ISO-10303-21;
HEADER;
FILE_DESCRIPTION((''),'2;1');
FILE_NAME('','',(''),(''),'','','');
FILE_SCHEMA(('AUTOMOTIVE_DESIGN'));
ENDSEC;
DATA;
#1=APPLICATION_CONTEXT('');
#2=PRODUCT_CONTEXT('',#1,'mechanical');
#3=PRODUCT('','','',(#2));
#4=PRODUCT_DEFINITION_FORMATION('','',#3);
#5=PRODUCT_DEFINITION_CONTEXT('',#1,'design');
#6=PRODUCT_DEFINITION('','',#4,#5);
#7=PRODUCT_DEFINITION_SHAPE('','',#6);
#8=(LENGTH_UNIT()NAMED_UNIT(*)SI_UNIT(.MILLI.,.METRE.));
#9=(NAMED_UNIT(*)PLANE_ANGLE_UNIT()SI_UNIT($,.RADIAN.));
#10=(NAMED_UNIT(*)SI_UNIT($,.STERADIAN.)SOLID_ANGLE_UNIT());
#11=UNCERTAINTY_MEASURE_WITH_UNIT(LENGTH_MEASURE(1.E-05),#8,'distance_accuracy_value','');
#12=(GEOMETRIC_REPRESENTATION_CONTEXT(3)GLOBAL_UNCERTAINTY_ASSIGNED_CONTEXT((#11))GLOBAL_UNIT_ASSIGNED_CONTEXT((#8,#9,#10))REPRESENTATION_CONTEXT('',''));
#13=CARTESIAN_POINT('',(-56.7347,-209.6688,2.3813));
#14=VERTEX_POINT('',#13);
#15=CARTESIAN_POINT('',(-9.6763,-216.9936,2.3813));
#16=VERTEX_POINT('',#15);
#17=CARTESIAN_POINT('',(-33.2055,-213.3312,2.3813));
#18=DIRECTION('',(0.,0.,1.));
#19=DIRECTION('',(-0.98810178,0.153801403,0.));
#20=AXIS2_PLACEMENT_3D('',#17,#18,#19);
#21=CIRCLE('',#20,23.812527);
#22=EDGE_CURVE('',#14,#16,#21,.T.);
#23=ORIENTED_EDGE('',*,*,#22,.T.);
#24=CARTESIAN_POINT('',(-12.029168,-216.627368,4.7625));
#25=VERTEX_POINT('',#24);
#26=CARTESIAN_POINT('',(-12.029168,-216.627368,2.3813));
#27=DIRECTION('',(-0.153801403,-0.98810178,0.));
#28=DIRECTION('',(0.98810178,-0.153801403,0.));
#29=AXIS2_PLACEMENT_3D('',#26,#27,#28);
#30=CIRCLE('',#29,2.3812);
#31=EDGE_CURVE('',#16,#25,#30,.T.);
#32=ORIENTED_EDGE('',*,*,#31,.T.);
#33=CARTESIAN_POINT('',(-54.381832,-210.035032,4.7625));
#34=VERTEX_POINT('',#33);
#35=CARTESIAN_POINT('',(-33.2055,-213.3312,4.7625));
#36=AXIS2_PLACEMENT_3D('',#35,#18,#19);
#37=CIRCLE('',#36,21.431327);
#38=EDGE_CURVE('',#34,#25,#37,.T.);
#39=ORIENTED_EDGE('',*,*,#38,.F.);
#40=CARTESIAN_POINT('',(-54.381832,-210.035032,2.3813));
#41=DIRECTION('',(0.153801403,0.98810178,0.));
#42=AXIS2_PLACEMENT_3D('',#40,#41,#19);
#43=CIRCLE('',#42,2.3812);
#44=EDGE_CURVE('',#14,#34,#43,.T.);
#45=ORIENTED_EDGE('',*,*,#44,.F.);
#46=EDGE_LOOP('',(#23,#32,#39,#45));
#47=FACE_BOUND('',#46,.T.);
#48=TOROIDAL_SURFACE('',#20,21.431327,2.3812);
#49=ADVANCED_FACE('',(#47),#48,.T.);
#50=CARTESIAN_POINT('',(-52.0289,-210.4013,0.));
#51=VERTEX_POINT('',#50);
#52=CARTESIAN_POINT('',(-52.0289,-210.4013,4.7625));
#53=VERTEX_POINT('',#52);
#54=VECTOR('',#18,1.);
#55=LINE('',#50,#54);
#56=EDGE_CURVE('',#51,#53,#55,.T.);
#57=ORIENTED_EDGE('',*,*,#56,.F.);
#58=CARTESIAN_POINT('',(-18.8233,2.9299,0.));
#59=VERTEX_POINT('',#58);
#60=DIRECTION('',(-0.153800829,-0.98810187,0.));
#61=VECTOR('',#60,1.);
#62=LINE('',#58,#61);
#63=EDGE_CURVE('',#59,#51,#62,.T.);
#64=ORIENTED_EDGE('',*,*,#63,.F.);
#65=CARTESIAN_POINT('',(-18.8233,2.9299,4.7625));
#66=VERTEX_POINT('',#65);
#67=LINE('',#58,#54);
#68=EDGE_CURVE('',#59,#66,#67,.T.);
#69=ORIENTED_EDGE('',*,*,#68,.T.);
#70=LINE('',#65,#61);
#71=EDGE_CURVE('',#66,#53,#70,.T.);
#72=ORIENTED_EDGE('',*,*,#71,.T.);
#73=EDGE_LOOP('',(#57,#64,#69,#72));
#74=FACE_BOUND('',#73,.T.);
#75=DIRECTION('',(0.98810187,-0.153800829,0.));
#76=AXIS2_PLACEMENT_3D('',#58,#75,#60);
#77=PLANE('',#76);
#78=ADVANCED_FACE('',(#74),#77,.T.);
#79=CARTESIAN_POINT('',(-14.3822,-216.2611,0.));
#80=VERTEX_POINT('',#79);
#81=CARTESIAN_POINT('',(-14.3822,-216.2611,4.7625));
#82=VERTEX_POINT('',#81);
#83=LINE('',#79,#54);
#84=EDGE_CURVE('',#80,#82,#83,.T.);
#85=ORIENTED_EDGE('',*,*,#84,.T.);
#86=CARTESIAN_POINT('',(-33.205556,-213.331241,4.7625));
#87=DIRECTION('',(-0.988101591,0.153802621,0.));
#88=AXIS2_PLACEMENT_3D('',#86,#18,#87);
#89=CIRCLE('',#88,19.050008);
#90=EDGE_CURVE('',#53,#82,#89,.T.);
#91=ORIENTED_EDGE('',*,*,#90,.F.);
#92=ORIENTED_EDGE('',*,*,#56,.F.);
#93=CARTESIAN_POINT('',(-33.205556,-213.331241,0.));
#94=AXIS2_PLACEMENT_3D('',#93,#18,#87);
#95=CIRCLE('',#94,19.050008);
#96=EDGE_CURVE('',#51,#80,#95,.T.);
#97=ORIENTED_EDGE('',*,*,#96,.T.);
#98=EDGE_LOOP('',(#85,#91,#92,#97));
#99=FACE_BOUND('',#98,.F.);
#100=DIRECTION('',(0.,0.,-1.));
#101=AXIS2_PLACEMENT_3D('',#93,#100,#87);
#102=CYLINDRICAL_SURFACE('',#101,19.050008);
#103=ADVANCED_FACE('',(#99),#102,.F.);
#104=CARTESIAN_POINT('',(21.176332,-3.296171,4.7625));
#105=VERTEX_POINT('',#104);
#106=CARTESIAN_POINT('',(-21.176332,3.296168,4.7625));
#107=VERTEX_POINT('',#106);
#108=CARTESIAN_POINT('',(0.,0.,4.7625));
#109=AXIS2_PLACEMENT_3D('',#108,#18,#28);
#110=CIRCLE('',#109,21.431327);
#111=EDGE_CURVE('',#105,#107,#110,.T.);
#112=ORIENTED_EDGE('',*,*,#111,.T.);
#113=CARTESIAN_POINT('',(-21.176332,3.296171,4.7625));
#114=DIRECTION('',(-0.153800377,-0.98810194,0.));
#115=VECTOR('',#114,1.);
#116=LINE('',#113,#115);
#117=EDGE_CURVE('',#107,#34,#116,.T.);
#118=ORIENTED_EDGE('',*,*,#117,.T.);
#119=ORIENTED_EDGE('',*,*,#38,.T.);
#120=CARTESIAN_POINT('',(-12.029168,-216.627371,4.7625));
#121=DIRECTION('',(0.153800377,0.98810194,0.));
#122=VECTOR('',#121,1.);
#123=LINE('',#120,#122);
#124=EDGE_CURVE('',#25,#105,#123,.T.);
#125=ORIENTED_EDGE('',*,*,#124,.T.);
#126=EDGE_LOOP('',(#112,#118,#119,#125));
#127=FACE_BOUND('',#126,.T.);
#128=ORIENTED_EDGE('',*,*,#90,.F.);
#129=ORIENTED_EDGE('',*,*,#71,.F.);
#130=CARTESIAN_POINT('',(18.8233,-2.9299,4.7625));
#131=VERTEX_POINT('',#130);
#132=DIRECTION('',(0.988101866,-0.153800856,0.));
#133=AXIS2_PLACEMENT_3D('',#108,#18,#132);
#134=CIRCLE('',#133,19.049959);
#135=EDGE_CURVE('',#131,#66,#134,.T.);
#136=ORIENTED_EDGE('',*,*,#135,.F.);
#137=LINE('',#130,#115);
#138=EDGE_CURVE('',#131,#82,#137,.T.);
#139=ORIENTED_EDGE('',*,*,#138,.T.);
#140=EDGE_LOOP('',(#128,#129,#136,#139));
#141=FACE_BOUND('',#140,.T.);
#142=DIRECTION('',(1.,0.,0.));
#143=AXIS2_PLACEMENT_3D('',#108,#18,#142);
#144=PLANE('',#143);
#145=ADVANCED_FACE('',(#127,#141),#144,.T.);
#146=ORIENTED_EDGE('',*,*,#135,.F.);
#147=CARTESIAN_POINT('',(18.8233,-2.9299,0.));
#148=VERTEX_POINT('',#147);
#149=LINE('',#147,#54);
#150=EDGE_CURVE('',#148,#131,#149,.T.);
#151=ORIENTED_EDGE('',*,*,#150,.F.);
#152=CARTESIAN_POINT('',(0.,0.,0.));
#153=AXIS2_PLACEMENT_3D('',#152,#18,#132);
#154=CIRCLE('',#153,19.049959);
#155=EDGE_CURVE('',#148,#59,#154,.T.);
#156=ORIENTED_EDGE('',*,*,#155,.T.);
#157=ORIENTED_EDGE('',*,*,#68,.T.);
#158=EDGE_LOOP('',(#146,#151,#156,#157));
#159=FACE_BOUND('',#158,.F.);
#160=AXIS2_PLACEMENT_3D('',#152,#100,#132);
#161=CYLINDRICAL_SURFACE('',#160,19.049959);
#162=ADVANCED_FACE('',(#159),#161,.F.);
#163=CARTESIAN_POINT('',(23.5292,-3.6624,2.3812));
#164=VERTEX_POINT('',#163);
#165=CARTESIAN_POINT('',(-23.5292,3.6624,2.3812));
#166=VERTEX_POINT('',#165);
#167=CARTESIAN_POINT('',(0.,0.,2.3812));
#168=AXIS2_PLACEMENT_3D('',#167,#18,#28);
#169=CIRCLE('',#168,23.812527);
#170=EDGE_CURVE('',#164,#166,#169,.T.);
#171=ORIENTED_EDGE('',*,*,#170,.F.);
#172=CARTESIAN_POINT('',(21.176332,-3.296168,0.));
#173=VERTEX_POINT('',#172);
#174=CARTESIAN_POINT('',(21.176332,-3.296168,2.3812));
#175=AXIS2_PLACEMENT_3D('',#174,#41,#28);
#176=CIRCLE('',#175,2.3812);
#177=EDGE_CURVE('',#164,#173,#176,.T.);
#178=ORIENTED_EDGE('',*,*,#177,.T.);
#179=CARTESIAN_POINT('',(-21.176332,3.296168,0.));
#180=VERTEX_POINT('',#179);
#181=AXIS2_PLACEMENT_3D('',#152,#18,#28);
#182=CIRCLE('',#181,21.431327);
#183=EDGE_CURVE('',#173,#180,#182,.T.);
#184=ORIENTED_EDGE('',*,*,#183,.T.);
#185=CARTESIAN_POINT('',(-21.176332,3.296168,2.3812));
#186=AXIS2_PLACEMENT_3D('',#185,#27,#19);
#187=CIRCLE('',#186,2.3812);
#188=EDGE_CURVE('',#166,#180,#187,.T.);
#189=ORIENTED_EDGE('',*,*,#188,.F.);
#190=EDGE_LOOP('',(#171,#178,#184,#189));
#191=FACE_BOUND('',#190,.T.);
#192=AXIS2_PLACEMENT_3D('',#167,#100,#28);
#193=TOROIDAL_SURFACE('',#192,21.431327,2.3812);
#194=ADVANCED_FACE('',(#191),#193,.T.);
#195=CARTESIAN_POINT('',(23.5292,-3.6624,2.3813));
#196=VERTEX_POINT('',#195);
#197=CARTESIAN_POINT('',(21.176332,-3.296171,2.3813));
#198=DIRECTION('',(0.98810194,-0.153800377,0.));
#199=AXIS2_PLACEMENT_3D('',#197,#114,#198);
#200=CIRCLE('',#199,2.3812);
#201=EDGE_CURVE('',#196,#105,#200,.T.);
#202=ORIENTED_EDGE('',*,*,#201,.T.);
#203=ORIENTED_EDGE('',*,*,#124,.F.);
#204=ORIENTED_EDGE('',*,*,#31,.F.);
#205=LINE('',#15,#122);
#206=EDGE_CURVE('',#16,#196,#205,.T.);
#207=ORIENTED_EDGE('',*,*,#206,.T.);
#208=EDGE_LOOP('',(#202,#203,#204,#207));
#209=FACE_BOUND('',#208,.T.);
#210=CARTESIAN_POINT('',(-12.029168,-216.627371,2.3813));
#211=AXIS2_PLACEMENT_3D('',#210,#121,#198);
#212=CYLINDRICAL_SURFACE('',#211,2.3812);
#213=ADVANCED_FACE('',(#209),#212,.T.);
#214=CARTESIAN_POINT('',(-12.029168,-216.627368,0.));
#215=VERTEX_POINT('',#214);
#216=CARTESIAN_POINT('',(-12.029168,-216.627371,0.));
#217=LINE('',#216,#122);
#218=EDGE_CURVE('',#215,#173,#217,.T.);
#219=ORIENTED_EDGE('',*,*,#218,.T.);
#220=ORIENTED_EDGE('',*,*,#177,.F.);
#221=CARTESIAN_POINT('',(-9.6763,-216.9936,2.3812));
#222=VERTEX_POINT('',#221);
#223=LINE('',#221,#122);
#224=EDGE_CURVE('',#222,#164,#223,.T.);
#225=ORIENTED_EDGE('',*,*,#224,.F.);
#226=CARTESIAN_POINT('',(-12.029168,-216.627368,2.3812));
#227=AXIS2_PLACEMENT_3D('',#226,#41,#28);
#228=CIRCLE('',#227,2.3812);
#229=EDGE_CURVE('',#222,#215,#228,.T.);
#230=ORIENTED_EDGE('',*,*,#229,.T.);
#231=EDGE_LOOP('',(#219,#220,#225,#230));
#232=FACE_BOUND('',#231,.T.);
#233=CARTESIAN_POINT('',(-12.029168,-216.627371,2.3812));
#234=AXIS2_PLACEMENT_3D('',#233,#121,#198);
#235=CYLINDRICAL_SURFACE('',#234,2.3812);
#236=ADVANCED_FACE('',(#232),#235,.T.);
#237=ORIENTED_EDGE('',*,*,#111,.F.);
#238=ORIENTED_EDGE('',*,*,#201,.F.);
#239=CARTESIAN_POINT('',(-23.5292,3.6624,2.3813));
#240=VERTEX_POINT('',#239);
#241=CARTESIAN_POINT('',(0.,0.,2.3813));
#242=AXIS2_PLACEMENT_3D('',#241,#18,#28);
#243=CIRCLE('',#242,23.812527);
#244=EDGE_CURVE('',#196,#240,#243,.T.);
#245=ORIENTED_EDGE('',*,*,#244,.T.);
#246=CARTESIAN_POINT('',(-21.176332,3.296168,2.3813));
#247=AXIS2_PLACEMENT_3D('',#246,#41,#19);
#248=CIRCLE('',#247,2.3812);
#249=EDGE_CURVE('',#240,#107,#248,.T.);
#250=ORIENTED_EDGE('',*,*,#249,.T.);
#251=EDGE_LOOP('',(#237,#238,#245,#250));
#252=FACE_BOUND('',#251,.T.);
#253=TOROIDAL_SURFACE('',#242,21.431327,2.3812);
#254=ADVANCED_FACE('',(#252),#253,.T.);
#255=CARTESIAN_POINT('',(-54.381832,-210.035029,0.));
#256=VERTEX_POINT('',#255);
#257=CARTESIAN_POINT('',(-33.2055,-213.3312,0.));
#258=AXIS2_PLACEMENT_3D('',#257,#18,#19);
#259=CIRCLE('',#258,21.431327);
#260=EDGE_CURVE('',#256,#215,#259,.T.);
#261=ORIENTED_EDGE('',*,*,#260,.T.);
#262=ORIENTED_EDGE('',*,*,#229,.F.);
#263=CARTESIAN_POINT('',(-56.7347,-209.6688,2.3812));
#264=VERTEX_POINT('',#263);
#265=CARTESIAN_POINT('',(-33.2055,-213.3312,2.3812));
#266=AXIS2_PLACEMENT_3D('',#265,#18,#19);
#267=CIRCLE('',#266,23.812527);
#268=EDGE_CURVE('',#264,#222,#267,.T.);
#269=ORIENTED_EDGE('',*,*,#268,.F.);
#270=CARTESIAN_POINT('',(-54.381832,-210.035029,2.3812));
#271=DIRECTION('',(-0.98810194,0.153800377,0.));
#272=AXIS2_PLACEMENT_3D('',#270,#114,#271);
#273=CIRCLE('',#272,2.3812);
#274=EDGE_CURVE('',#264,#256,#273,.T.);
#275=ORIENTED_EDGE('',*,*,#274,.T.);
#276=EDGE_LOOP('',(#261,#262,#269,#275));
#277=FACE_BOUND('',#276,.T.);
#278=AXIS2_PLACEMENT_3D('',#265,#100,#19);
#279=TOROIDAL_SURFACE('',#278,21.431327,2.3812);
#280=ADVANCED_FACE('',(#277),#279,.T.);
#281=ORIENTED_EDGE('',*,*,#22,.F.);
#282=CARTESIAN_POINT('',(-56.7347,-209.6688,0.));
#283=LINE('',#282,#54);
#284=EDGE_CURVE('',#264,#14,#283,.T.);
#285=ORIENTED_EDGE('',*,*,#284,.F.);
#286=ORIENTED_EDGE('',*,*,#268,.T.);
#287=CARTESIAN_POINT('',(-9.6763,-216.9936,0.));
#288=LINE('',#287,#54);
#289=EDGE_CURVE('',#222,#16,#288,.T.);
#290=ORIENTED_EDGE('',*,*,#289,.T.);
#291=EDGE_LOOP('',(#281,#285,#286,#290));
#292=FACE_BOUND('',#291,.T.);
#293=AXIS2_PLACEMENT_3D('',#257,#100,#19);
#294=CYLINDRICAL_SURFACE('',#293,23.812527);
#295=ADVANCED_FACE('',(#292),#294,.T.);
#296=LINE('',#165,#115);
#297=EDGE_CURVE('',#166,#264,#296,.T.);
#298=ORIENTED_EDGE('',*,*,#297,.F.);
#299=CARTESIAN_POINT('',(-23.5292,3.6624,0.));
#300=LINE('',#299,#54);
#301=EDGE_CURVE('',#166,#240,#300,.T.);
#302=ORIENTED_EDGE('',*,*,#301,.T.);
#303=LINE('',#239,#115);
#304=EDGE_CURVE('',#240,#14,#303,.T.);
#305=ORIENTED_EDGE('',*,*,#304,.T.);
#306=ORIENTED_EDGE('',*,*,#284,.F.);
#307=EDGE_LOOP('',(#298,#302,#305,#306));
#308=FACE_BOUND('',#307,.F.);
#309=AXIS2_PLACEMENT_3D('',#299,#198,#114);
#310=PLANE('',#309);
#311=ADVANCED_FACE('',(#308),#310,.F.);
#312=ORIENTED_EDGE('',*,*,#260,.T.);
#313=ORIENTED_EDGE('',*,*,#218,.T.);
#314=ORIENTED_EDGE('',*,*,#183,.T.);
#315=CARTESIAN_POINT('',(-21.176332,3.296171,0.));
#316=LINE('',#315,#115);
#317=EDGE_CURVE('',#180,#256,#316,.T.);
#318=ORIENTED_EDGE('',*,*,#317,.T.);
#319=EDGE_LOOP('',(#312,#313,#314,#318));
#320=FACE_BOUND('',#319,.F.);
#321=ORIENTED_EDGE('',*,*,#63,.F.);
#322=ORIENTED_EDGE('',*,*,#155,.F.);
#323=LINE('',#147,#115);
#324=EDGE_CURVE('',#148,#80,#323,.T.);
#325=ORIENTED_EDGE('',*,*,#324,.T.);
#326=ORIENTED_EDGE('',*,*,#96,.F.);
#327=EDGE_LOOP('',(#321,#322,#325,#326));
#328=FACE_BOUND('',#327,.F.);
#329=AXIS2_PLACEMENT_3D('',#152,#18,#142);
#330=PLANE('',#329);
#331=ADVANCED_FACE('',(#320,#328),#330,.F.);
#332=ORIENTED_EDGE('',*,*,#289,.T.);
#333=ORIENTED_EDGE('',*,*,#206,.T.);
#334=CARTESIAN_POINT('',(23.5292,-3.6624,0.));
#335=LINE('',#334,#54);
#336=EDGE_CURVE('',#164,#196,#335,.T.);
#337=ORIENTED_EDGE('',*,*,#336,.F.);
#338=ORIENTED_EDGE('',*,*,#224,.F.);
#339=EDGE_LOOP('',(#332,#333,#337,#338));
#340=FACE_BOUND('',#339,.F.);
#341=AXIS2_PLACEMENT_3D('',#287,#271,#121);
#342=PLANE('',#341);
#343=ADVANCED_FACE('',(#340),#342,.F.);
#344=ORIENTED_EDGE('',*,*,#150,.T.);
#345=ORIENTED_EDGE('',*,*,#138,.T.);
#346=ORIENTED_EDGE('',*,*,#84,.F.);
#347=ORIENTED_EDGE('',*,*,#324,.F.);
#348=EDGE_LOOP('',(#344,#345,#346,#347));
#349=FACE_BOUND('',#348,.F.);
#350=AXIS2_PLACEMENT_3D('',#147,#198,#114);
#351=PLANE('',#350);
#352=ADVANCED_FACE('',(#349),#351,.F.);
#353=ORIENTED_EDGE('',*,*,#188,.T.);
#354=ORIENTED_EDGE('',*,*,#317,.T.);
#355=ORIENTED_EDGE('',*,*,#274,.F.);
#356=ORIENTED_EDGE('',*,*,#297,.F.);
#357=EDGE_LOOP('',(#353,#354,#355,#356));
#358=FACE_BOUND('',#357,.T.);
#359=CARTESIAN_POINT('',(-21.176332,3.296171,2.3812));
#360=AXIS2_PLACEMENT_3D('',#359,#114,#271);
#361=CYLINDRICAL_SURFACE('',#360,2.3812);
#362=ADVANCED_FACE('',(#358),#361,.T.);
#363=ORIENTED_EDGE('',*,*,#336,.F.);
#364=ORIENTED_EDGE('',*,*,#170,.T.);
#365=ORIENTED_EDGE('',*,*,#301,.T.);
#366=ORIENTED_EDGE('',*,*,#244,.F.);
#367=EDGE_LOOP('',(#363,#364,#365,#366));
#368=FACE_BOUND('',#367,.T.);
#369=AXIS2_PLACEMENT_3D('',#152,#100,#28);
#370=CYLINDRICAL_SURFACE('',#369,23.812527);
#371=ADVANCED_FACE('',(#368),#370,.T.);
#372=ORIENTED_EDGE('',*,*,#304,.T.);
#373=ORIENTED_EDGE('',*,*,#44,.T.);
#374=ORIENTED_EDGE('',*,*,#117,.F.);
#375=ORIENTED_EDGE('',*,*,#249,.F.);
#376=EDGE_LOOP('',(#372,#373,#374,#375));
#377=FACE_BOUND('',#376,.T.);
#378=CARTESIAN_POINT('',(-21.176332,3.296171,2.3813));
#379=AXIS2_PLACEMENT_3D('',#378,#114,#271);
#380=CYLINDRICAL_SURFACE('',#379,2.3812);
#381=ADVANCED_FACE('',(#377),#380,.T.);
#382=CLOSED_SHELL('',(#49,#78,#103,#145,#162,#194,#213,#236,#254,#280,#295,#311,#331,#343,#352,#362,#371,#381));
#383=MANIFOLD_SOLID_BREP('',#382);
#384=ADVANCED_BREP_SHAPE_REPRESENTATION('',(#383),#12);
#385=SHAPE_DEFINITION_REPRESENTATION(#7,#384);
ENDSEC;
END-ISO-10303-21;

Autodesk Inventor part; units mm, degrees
ref_plane "YZ Plane" through (0, 0, 0) normal (1, 0, 0) x (0, 1, 0)
ref_plane "XZ Plane" through (0, 0, 0) normal (0, 1, 0) x (-1, 0, 0)
ref_plane "XY Plane" through (0, 0, 0) normal (0, 0, 1) x (1, 0, 0)
sketch "Sketch1" plane through (0, 0, 0) normal (0, 0, 1) x (1, 0, 0)
  arc A0 (18.8233, -2.9299) -> (-18.8233, 2.9299) centre (0, 0) ccw
  arc A1 (-52.0289, -210.4013) -> (-14.3822, -216.2611) centre (-33.2055, -213.3312) ccw
  line L0 (0, 0) -> (-33.2055, -213.3312) construction
  line L1 (18.8233, -2.9299) -> (-14.3822, -216.2611)
  line L2 (-18.8233, 2.9299) -> (-52.0289, -210.4013)
  line L3 (-33.2055, -213.3312) -> (-14.3822, -216.2611) construction
  line L4 (0, 0) -> (18.8233, -2.9299) construction
  arc A2 (23.5292, -3.6624) -> (-23.5292, 3.6624) centre (0, 0) ccw
  arc A3 (-56.7347, -209.6688) -> (-9.6763, -216.9936) centre (-33.2055, -213.3312) ccw
  line L5 (-23.5292, 3.6624) -> (-56.7347, -209.6688)
  line L6 (-9.6763, -216.9936) -> (23.5292, -3.6624)
  dimension "d0" = 215.9
  dimension "d1" = 4.7625
  dimension "d2" = 19.05
extrude "Extrusion1" add sketch "Sketch1" along normal blind 4.7625
fillet "Fillet1" radius 2.3813 8 edges at (-36.8679, -236.8604, 4.7625) (-40.1319, -103.0032, 4.7625) (3.6624, 23.5292, 4.7625) (6.9264, -110.328, 4.7625) (3.6624, 23.5292, 0) (-40.1319, -103.0032, 0) (-36.8679, -236.8604, 0) (6.9264, -110.328, 0)
properties part number "Belt_VerticalConveyor_Outer"
